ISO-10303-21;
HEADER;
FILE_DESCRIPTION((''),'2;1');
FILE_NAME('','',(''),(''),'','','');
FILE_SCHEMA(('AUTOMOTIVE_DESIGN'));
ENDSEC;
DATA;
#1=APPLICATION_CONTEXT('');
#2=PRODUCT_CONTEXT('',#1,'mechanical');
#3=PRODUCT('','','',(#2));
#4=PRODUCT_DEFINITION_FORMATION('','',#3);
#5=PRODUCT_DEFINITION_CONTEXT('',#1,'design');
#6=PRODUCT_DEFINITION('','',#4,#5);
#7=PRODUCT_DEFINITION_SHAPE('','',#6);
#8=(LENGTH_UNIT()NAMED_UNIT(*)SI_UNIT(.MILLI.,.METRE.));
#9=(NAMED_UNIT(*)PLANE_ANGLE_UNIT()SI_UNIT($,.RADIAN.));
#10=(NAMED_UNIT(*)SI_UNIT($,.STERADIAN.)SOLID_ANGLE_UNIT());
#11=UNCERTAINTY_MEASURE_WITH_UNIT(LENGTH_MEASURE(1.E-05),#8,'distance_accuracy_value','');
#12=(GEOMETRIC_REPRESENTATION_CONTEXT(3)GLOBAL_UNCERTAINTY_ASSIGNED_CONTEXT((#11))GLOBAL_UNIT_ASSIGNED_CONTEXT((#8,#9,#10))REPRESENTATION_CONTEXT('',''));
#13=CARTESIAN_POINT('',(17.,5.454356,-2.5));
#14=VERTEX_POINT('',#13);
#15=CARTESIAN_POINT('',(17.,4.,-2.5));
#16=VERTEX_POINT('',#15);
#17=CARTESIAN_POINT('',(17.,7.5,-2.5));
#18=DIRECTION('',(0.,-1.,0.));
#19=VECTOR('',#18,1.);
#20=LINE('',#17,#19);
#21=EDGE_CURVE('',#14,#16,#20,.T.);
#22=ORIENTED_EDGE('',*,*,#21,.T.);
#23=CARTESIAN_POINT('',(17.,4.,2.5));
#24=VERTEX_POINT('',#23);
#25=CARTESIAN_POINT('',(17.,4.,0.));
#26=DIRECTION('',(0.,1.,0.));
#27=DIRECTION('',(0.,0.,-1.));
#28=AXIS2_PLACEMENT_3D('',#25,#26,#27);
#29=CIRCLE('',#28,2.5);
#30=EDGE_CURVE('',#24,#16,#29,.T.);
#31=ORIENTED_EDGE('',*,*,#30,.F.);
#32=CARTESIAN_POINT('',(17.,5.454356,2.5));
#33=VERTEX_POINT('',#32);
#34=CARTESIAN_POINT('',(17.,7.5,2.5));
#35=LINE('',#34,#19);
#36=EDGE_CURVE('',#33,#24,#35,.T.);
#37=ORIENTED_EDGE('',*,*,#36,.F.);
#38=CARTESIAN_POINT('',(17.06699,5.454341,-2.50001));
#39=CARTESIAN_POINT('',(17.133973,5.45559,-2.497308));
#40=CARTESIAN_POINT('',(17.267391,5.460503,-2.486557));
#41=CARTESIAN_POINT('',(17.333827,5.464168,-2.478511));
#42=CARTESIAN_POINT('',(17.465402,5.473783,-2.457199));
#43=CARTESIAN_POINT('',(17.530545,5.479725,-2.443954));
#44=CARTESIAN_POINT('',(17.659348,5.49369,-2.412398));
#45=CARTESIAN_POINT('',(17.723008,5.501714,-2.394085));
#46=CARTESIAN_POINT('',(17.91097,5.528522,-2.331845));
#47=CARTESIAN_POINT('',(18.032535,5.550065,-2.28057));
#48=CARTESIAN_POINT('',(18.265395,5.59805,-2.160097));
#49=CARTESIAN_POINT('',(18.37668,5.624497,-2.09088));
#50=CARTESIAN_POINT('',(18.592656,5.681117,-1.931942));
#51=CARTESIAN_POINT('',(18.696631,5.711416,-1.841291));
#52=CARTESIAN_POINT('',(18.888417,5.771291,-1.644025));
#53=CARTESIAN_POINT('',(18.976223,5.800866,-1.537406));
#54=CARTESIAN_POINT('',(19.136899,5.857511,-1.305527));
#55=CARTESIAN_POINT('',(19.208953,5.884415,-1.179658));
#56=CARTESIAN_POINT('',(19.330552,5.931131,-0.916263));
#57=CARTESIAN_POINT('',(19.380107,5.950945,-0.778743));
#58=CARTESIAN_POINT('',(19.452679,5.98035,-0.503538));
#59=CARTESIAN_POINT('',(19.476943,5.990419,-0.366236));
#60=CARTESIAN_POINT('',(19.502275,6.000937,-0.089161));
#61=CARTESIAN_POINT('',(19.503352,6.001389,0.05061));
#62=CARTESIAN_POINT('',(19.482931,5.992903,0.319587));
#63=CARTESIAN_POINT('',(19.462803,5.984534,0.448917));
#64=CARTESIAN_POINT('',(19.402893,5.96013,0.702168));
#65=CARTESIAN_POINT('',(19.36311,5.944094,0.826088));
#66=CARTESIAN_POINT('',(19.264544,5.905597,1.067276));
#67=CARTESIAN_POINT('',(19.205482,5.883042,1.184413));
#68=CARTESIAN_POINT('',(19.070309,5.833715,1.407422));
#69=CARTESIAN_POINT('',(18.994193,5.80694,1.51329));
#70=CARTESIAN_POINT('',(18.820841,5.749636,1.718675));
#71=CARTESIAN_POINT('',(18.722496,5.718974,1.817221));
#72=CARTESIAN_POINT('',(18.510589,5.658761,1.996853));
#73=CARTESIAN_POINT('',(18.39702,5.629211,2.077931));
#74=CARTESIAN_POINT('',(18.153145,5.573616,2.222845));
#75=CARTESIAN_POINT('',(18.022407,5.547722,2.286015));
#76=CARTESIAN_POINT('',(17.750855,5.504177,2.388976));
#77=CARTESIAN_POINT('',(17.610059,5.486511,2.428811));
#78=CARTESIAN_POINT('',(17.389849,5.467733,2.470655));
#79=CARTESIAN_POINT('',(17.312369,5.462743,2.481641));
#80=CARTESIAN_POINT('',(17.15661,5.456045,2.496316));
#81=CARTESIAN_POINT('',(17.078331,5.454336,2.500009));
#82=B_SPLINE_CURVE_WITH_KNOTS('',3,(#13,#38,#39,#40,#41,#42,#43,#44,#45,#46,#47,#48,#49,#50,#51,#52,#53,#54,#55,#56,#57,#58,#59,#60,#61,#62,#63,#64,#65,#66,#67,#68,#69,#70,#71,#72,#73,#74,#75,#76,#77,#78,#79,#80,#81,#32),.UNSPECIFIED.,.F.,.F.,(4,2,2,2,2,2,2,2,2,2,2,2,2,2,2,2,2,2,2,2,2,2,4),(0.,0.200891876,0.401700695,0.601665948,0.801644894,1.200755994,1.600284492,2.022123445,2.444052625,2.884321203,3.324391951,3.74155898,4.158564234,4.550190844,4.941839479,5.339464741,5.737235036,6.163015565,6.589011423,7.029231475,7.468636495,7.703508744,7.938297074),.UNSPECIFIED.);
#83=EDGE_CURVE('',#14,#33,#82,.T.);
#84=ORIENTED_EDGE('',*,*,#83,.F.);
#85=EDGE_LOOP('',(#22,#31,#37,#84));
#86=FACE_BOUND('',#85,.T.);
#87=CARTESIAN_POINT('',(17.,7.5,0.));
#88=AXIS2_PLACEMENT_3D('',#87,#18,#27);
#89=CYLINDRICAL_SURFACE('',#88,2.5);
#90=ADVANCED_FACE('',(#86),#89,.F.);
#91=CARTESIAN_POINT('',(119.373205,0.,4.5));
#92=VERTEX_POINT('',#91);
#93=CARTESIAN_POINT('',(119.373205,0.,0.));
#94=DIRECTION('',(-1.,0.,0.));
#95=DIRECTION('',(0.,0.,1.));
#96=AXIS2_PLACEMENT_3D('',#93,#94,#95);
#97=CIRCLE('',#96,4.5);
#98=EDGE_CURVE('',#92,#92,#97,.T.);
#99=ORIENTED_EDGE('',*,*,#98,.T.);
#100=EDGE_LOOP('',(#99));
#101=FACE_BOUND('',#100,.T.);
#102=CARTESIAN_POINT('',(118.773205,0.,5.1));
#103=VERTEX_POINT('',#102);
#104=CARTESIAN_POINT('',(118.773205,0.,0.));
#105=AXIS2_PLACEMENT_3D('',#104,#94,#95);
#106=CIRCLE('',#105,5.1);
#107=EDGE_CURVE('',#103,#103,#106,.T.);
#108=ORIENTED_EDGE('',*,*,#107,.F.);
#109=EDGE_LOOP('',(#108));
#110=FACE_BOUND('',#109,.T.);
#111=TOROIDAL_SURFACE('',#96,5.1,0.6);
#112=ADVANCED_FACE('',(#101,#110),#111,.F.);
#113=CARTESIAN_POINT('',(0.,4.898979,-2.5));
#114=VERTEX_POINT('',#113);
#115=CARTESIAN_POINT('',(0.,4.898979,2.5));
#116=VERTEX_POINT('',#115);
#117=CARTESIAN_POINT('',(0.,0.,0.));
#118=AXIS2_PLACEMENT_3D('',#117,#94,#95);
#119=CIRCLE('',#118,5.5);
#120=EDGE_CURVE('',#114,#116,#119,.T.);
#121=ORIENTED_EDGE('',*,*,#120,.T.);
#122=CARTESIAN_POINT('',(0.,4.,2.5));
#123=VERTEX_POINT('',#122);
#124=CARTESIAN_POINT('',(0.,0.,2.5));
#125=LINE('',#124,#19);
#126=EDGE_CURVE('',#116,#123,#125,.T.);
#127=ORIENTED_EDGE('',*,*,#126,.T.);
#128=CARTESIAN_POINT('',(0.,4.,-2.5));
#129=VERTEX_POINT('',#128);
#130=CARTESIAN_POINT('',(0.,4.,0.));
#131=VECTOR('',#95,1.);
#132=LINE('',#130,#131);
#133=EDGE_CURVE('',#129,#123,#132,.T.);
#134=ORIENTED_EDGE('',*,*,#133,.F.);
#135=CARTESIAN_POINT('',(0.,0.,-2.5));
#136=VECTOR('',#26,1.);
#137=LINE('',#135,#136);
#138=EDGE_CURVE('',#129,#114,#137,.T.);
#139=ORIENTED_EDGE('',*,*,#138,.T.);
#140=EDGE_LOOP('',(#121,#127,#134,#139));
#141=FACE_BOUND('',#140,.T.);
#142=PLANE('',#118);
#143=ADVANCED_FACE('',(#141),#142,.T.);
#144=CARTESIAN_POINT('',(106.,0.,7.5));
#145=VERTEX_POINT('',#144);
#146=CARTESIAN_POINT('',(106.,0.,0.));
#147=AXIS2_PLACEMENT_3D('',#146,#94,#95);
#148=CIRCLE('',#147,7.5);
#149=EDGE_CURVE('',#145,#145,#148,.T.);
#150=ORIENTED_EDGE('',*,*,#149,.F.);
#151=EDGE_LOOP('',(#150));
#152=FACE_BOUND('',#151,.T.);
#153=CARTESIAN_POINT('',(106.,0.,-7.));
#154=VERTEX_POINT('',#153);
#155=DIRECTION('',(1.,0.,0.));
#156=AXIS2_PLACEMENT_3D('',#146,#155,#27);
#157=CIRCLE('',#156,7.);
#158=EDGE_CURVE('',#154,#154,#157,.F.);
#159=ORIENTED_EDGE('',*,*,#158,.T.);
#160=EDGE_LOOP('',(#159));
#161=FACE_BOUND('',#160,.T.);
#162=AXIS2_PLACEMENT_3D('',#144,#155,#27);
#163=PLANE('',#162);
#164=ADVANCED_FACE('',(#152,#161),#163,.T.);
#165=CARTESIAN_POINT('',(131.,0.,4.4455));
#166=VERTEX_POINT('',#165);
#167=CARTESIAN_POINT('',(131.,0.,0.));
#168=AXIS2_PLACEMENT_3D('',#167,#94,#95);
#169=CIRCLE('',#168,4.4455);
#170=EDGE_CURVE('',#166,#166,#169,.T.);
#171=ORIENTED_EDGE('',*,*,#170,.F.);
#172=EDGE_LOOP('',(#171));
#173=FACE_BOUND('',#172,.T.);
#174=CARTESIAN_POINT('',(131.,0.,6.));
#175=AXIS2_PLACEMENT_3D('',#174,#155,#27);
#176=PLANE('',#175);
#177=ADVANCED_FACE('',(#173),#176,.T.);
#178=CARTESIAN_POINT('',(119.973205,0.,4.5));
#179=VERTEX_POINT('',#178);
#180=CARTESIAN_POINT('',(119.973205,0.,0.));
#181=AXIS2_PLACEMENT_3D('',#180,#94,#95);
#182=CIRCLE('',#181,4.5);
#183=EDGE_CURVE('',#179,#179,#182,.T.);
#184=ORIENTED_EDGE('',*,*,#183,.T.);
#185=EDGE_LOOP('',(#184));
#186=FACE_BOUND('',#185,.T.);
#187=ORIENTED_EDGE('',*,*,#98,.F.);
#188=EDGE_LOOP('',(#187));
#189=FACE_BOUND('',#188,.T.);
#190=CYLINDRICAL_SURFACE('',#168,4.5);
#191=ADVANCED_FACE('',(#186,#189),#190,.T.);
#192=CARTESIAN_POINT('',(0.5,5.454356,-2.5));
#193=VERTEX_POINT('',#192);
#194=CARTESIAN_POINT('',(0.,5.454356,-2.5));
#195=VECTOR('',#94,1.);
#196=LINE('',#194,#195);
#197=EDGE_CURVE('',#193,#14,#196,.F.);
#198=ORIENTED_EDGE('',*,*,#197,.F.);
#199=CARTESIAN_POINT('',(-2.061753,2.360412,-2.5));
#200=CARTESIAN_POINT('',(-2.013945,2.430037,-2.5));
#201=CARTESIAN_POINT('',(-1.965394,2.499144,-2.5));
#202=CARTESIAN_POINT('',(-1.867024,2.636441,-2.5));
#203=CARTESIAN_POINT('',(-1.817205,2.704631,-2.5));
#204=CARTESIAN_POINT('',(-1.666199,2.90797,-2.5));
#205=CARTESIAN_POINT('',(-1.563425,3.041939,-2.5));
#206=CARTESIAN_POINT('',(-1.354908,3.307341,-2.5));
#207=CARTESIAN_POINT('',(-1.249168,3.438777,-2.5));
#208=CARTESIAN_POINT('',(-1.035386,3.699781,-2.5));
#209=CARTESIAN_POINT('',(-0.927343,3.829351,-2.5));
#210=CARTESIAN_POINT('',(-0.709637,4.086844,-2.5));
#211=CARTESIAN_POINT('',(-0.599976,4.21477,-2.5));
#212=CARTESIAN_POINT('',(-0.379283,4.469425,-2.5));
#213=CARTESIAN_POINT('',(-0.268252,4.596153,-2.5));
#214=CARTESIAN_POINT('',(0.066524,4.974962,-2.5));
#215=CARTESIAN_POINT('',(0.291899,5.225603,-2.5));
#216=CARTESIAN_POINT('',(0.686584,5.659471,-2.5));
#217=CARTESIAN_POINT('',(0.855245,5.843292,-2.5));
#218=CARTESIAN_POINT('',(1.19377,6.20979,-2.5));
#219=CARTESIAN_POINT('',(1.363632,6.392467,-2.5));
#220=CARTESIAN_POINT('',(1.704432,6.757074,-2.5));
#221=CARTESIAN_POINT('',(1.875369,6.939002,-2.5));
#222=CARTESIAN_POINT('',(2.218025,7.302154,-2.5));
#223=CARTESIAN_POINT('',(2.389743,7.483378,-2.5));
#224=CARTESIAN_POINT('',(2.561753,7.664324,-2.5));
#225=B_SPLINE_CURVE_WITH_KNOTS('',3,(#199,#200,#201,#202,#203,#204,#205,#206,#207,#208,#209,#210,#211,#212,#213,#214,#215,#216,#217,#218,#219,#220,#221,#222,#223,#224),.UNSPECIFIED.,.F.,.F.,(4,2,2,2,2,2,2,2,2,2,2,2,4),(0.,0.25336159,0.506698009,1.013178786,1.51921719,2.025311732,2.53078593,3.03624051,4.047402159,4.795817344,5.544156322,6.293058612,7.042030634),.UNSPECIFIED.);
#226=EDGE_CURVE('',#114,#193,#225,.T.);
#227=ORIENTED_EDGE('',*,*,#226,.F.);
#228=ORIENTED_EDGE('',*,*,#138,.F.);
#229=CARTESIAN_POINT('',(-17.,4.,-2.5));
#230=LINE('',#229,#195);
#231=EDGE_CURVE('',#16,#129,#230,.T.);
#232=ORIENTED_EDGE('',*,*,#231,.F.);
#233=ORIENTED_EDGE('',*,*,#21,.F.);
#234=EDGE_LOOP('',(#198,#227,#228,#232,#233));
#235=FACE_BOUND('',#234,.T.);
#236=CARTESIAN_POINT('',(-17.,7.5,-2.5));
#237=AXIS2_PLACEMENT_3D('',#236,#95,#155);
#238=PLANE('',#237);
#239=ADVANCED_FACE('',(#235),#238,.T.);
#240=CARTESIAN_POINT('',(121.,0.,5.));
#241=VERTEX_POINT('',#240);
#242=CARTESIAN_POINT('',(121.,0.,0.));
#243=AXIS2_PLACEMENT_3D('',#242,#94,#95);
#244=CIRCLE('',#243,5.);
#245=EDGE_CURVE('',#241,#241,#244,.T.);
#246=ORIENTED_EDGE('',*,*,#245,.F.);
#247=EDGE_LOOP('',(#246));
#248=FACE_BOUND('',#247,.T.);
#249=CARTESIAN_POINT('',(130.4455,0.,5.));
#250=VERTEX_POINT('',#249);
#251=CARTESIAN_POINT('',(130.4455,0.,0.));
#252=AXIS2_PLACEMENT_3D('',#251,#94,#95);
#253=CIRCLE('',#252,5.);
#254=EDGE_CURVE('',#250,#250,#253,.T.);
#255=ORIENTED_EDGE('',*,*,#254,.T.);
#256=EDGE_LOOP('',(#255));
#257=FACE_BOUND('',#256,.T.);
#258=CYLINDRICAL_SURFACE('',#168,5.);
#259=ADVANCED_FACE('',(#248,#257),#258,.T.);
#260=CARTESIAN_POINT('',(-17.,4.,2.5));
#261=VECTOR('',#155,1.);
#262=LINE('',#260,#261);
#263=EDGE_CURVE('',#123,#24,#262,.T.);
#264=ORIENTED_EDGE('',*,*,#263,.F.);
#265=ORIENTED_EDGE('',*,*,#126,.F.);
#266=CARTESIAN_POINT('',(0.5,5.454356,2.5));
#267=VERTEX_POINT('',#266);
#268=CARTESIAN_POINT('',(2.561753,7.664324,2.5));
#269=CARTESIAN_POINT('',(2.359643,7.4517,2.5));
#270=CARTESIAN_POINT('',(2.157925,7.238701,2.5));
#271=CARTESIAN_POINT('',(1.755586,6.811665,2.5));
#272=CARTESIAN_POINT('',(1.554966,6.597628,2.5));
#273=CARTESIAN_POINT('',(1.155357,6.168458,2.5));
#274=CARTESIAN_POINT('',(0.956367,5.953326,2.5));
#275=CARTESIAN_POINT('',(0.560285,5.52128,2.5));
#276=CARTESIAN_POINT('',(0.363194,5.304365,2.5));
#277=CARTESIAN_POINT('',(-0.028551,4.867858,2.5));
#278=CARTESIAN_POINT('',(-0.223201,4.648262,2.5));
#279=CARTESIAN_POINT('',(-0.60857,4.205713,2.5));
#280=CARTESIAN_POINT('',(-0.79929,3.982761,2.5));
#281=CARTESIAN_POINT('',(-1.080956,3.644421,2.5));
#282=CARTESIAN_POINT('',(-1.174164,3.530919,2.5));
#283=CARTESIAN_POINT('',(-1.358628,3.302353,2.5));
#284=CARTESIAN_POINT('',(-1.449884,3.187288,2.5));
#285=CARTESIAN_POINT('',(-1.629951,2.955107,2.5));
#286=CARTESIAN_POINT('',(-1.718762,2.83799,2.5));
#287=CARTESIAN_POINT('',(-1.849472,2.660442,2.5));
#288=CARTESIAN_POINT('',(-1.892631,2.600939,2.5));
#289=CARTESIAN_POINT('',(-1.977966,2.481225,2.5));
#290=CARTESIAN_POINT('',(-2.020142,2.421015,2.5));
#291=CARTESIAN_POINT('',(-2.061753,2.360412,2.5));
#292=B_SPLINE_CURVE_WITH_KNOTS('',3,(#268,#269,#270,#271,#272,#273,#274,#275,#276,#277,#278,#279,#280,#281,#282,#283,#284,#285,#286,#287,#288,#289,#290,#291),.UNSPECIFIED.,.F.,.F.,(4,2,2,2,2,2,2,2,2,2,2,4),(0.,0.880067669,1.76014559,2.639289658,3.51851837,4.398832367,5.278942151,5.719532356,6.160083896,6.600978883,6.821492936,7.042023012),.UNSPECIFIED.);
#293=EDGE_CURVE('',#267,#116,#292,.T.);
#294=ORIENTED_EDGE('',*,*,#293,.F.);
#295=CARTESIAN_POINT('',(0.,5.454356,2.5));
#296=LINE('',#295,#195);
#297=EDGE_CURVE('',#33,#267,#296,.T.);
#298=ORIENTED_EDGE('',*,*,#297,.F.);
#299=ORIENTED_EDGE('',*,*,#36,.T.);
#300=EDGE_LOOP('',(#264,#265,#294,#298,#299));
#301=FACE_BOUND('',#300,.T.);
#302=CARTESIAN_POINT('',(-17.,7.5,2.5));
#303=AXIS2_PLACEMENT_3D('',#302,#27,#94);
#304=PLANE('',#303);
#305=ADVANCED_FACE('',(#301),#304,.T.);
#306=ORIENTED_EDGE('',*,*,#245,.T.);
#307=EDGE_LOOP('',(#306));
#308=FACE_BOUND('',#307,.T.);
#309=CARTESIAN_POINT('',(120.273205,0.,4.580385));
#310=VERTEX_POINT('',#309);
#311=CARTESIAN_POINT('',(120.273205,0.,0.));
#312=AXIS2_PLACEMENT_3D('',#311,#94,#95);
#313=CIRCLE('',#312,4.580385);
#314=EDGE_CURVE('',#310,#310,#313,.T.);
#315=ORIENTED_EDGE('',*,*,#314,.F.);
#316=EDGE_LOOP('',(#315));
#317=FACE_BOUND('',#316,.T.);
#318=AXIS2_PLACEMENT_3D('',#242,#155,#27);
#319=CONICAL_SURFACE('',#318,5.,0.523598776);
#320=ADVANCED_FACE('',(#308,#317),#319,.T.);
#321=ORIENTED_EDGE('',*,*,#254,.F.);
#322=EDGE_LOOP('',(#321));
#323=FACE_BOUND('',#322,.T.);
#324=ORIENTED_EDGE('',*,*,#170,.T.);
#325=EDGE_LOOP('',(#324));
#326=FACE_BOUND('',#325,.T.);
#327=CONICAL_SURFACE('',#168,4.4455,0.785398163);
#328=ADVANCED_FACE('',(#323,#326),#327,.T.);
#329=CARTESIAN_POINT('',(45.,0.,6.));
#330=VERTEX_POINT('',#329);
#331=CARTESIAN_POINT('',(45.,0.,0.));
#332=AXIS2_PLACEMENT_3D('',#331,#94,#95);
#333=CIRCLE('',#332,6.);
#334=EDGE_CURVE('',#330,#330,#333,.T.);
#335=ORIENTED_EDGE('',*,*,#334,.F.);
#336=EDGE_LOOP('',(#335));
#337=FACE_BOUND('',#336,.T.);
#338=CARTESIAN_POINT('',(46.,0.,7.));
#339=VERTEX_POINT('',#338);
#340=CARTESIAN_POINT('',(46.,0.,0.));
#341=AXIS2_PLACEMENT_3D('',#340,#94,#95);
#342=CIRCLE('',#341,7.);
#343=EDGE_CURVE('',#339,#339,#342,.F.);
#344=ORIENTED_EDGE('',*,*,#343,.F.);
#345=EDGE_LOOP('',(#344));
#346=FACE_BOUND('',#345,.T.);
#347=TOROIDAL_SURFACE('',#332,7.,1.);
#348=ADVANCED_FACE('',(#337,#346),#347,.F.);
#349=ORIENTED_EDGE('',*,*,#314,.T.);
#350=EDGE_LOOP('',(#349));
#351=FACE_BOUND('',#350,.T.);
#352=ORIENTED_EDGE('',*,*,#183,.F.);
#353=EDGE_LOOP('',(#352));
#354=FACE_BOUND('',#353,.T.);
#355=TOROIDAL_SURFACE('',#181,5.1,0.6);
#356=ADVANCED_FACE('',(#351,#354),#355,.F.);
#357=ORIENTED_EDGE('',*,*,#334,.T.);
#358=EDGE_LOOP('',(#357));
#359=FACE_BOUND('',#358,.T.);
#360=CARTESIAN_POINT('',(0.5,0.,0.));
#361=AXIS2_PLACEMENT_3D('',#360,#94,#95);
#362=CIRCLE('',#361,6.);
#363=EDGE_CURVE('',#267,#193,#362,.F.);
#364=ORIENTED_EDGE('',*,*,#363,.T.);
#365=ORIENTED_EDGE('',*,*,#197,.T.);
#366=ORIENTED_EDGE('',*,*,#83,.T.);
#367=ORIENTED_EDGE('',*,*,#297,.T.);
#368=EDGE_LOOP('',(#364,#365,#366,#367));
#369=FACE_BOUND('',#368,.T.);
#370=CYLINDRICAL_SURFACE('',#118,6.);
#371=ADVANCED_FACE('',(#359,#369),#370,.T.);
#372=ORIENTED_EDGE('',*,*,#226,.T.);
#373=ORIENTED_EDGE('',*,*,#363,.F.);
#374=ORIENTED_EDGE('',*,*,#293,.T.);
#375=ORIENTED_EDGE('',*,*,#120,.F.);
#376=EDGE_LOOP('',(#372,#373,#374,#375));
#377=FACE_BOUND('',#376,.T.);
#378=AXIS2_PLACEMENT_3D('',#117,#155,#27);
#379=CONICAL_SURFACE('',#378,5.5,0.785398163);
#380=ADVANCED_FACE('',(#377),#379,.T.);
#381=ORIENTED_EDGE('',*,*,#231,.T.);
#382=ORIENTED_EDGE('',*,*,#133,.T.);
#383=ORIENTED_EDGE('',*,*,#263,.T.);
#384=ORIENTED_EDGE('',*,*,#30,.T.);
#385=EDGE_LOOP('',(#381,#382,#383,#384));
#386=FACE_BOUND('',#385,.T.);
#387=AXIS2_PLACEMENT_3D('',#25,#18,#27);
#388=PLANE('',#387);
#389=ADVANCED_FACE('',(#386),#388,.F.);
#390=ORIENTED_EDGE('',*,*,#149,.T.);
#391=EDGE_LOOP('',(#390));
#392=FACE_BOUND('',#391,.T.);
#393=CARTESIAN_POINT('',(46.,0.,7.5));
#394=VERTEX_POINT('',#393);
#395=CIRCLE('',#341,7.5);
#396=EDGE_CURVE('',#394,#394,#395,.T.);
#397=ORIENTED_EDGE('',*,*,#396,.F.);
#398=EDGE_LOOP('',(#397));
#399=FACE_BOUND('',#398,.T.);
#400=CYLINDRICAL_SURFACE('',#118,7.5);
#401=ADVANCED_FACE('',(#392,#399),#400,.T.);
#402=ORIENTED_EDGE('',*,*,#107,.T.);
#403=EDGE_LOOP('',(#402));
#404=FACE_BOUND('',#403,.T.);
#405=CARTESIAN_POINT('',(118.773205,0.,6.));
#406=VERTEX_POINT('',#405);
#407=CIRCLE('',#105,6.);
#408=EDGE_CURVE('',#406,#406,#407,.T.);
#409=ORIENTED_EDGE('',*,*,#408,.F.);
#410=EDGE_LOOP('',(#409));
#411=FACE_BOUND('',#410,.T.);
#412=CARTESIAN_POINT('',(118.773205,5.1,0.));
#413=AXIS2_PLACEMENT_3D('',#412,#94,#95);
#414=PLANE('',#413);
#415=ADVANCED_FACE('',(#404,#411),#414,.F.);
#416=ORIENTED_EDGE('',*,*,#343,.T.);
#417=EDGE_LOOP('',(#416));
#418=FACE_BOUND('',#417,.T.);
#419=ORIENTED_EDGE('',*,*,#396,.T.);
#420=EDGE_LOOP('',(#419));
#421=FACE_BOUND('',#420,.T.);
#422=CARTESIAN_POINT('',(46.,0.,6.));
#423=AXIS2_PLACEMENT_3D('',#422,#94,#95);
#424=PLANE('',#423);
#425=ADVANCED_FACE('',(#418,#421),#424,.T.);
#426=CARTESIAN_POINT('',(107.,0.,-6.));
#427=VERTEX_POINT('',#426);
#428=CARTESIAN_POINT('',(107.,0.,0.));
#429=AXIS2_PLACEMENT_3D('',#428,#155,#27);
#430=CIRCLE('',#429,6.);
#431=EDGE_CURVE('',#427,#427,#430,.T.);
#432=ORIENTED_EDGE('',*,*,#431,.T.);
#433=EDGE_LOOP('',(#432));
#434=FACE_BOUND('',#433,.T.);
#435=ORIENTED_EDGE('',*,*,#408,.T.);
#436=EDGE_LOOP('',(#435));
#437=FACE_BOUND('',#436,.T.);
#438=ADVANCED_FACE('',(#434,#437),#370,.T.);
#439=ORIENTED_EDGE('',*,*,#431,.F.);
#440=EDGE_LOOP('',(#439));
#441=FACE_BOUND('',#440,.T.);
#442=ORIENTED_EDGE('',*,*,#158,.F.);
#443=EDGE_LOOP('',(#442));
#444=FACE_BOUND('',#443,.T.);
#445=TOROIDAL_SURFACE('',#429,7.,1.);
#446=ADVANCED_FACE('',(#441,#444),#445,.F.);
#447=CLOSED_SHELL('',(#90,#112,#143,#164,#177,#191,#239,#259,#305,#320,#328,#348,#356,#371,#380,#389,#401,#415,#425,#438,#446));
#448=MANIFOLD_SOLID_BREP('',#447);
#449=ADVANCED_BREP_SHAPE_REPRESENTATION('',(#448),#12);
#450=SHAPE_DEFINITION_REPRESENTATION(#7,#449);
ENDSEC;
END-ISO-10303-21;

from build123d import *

# Parameters (mm, degrees)
FILLET1_R          = 1
CHAMFER2_SIZE      = 0.5
CUT_EXTRUDE1_START = 4
CUT_EXTRUDE1_DEPTH = 128.428687888


# Read off the part's stored shape, not the designer's step: M10x1.0 Machine Threads Stud1
with BuildPart() as part:
    # Sketch1 → Revolve1 (revolve)
    with BuildSketch(Plane(origin=(0, 0, 0), x_dir=(1, 0, 0), z_dir=(0, 1, 0))):
        Polygon((0, 0), (0, -6), (46, -6), (46, -7.5), (106, -7.5), (106, -6), (131, -6), (131, 0), align=None)
    revolve(axis=Axis((0, 0, 0), (1, 0, 0)))

    # Fillet1
    fillet1_edges = [part.edges().sort_by_distance(p)[0] for p in [
        (106, 0, -6),
        (46, 0, -6),
    ]]
    fillet(fillet1_edges, radius=FILLET1_R)

    # M10x1.0 Machine Threads Stud1 outline → M10x1.0 Machine Threads Stud1 (revolve, cut)
    with BuildSketch(Plane.YX):
        with BuildLine():
            Line((6, 131), (4.4455, 131))
            Line((4.4455, 131), (5, 130.4455))
            Line((5, 130.4455), (5, 121))
            Line((5, 121), (4.580384758, 120.273205081))
            ThreePointArc((4.580384758, 120.273205081), (4.520444504, 120.128496508), (4.5, 119.973205081))
            Line((4.5, 119.973205081), (4.5, 119.373205081))
            ThreePointArc((4.5, 119.373205081), (4.675735931, 118.948941012), (5.1, 118.773205081))
            Line((5.1, 118.773205081), (6, 118.773205081))
            Line((6, 118.773205081), (6, 131))
        make_face()
    revolve(axis=Axis((0, 0, 0), (1, 0, 0)), mode=Mode.SUBTRACT)

    # Chamfer2
    chamfer2_edges = [part.edges().sort_by_distance(p)[0] for p in [
        (0, 0, -6),
    ]]
    chamfer(chamfer2_edges, length=CHAMFER2_SIZE)

    # Sketch3 → Cut-Extrude1 (cut, through all)
    with BuildSketch(Plane(origin=(0, 0, 0), x_dir=(1, 0, 0), z_dir=(0, 1, 0)).offset(CUT_EXTRUDE1_START)):
        with BuildLine():
            Line((-17, -2.5), (17, -2.5))
            ThreePointArc((17, -2.5), (19.5, 0), (17, 2.5))
            Line((17, 2.5), (-17, 2.5))
            Line((-17, 2.5), (-17, -2.5))
        make_face()
    extrude(amount=CUT_EXTRUDE1_DEPTH, mode=Mode.SUBTRACT)


solid = part.part
